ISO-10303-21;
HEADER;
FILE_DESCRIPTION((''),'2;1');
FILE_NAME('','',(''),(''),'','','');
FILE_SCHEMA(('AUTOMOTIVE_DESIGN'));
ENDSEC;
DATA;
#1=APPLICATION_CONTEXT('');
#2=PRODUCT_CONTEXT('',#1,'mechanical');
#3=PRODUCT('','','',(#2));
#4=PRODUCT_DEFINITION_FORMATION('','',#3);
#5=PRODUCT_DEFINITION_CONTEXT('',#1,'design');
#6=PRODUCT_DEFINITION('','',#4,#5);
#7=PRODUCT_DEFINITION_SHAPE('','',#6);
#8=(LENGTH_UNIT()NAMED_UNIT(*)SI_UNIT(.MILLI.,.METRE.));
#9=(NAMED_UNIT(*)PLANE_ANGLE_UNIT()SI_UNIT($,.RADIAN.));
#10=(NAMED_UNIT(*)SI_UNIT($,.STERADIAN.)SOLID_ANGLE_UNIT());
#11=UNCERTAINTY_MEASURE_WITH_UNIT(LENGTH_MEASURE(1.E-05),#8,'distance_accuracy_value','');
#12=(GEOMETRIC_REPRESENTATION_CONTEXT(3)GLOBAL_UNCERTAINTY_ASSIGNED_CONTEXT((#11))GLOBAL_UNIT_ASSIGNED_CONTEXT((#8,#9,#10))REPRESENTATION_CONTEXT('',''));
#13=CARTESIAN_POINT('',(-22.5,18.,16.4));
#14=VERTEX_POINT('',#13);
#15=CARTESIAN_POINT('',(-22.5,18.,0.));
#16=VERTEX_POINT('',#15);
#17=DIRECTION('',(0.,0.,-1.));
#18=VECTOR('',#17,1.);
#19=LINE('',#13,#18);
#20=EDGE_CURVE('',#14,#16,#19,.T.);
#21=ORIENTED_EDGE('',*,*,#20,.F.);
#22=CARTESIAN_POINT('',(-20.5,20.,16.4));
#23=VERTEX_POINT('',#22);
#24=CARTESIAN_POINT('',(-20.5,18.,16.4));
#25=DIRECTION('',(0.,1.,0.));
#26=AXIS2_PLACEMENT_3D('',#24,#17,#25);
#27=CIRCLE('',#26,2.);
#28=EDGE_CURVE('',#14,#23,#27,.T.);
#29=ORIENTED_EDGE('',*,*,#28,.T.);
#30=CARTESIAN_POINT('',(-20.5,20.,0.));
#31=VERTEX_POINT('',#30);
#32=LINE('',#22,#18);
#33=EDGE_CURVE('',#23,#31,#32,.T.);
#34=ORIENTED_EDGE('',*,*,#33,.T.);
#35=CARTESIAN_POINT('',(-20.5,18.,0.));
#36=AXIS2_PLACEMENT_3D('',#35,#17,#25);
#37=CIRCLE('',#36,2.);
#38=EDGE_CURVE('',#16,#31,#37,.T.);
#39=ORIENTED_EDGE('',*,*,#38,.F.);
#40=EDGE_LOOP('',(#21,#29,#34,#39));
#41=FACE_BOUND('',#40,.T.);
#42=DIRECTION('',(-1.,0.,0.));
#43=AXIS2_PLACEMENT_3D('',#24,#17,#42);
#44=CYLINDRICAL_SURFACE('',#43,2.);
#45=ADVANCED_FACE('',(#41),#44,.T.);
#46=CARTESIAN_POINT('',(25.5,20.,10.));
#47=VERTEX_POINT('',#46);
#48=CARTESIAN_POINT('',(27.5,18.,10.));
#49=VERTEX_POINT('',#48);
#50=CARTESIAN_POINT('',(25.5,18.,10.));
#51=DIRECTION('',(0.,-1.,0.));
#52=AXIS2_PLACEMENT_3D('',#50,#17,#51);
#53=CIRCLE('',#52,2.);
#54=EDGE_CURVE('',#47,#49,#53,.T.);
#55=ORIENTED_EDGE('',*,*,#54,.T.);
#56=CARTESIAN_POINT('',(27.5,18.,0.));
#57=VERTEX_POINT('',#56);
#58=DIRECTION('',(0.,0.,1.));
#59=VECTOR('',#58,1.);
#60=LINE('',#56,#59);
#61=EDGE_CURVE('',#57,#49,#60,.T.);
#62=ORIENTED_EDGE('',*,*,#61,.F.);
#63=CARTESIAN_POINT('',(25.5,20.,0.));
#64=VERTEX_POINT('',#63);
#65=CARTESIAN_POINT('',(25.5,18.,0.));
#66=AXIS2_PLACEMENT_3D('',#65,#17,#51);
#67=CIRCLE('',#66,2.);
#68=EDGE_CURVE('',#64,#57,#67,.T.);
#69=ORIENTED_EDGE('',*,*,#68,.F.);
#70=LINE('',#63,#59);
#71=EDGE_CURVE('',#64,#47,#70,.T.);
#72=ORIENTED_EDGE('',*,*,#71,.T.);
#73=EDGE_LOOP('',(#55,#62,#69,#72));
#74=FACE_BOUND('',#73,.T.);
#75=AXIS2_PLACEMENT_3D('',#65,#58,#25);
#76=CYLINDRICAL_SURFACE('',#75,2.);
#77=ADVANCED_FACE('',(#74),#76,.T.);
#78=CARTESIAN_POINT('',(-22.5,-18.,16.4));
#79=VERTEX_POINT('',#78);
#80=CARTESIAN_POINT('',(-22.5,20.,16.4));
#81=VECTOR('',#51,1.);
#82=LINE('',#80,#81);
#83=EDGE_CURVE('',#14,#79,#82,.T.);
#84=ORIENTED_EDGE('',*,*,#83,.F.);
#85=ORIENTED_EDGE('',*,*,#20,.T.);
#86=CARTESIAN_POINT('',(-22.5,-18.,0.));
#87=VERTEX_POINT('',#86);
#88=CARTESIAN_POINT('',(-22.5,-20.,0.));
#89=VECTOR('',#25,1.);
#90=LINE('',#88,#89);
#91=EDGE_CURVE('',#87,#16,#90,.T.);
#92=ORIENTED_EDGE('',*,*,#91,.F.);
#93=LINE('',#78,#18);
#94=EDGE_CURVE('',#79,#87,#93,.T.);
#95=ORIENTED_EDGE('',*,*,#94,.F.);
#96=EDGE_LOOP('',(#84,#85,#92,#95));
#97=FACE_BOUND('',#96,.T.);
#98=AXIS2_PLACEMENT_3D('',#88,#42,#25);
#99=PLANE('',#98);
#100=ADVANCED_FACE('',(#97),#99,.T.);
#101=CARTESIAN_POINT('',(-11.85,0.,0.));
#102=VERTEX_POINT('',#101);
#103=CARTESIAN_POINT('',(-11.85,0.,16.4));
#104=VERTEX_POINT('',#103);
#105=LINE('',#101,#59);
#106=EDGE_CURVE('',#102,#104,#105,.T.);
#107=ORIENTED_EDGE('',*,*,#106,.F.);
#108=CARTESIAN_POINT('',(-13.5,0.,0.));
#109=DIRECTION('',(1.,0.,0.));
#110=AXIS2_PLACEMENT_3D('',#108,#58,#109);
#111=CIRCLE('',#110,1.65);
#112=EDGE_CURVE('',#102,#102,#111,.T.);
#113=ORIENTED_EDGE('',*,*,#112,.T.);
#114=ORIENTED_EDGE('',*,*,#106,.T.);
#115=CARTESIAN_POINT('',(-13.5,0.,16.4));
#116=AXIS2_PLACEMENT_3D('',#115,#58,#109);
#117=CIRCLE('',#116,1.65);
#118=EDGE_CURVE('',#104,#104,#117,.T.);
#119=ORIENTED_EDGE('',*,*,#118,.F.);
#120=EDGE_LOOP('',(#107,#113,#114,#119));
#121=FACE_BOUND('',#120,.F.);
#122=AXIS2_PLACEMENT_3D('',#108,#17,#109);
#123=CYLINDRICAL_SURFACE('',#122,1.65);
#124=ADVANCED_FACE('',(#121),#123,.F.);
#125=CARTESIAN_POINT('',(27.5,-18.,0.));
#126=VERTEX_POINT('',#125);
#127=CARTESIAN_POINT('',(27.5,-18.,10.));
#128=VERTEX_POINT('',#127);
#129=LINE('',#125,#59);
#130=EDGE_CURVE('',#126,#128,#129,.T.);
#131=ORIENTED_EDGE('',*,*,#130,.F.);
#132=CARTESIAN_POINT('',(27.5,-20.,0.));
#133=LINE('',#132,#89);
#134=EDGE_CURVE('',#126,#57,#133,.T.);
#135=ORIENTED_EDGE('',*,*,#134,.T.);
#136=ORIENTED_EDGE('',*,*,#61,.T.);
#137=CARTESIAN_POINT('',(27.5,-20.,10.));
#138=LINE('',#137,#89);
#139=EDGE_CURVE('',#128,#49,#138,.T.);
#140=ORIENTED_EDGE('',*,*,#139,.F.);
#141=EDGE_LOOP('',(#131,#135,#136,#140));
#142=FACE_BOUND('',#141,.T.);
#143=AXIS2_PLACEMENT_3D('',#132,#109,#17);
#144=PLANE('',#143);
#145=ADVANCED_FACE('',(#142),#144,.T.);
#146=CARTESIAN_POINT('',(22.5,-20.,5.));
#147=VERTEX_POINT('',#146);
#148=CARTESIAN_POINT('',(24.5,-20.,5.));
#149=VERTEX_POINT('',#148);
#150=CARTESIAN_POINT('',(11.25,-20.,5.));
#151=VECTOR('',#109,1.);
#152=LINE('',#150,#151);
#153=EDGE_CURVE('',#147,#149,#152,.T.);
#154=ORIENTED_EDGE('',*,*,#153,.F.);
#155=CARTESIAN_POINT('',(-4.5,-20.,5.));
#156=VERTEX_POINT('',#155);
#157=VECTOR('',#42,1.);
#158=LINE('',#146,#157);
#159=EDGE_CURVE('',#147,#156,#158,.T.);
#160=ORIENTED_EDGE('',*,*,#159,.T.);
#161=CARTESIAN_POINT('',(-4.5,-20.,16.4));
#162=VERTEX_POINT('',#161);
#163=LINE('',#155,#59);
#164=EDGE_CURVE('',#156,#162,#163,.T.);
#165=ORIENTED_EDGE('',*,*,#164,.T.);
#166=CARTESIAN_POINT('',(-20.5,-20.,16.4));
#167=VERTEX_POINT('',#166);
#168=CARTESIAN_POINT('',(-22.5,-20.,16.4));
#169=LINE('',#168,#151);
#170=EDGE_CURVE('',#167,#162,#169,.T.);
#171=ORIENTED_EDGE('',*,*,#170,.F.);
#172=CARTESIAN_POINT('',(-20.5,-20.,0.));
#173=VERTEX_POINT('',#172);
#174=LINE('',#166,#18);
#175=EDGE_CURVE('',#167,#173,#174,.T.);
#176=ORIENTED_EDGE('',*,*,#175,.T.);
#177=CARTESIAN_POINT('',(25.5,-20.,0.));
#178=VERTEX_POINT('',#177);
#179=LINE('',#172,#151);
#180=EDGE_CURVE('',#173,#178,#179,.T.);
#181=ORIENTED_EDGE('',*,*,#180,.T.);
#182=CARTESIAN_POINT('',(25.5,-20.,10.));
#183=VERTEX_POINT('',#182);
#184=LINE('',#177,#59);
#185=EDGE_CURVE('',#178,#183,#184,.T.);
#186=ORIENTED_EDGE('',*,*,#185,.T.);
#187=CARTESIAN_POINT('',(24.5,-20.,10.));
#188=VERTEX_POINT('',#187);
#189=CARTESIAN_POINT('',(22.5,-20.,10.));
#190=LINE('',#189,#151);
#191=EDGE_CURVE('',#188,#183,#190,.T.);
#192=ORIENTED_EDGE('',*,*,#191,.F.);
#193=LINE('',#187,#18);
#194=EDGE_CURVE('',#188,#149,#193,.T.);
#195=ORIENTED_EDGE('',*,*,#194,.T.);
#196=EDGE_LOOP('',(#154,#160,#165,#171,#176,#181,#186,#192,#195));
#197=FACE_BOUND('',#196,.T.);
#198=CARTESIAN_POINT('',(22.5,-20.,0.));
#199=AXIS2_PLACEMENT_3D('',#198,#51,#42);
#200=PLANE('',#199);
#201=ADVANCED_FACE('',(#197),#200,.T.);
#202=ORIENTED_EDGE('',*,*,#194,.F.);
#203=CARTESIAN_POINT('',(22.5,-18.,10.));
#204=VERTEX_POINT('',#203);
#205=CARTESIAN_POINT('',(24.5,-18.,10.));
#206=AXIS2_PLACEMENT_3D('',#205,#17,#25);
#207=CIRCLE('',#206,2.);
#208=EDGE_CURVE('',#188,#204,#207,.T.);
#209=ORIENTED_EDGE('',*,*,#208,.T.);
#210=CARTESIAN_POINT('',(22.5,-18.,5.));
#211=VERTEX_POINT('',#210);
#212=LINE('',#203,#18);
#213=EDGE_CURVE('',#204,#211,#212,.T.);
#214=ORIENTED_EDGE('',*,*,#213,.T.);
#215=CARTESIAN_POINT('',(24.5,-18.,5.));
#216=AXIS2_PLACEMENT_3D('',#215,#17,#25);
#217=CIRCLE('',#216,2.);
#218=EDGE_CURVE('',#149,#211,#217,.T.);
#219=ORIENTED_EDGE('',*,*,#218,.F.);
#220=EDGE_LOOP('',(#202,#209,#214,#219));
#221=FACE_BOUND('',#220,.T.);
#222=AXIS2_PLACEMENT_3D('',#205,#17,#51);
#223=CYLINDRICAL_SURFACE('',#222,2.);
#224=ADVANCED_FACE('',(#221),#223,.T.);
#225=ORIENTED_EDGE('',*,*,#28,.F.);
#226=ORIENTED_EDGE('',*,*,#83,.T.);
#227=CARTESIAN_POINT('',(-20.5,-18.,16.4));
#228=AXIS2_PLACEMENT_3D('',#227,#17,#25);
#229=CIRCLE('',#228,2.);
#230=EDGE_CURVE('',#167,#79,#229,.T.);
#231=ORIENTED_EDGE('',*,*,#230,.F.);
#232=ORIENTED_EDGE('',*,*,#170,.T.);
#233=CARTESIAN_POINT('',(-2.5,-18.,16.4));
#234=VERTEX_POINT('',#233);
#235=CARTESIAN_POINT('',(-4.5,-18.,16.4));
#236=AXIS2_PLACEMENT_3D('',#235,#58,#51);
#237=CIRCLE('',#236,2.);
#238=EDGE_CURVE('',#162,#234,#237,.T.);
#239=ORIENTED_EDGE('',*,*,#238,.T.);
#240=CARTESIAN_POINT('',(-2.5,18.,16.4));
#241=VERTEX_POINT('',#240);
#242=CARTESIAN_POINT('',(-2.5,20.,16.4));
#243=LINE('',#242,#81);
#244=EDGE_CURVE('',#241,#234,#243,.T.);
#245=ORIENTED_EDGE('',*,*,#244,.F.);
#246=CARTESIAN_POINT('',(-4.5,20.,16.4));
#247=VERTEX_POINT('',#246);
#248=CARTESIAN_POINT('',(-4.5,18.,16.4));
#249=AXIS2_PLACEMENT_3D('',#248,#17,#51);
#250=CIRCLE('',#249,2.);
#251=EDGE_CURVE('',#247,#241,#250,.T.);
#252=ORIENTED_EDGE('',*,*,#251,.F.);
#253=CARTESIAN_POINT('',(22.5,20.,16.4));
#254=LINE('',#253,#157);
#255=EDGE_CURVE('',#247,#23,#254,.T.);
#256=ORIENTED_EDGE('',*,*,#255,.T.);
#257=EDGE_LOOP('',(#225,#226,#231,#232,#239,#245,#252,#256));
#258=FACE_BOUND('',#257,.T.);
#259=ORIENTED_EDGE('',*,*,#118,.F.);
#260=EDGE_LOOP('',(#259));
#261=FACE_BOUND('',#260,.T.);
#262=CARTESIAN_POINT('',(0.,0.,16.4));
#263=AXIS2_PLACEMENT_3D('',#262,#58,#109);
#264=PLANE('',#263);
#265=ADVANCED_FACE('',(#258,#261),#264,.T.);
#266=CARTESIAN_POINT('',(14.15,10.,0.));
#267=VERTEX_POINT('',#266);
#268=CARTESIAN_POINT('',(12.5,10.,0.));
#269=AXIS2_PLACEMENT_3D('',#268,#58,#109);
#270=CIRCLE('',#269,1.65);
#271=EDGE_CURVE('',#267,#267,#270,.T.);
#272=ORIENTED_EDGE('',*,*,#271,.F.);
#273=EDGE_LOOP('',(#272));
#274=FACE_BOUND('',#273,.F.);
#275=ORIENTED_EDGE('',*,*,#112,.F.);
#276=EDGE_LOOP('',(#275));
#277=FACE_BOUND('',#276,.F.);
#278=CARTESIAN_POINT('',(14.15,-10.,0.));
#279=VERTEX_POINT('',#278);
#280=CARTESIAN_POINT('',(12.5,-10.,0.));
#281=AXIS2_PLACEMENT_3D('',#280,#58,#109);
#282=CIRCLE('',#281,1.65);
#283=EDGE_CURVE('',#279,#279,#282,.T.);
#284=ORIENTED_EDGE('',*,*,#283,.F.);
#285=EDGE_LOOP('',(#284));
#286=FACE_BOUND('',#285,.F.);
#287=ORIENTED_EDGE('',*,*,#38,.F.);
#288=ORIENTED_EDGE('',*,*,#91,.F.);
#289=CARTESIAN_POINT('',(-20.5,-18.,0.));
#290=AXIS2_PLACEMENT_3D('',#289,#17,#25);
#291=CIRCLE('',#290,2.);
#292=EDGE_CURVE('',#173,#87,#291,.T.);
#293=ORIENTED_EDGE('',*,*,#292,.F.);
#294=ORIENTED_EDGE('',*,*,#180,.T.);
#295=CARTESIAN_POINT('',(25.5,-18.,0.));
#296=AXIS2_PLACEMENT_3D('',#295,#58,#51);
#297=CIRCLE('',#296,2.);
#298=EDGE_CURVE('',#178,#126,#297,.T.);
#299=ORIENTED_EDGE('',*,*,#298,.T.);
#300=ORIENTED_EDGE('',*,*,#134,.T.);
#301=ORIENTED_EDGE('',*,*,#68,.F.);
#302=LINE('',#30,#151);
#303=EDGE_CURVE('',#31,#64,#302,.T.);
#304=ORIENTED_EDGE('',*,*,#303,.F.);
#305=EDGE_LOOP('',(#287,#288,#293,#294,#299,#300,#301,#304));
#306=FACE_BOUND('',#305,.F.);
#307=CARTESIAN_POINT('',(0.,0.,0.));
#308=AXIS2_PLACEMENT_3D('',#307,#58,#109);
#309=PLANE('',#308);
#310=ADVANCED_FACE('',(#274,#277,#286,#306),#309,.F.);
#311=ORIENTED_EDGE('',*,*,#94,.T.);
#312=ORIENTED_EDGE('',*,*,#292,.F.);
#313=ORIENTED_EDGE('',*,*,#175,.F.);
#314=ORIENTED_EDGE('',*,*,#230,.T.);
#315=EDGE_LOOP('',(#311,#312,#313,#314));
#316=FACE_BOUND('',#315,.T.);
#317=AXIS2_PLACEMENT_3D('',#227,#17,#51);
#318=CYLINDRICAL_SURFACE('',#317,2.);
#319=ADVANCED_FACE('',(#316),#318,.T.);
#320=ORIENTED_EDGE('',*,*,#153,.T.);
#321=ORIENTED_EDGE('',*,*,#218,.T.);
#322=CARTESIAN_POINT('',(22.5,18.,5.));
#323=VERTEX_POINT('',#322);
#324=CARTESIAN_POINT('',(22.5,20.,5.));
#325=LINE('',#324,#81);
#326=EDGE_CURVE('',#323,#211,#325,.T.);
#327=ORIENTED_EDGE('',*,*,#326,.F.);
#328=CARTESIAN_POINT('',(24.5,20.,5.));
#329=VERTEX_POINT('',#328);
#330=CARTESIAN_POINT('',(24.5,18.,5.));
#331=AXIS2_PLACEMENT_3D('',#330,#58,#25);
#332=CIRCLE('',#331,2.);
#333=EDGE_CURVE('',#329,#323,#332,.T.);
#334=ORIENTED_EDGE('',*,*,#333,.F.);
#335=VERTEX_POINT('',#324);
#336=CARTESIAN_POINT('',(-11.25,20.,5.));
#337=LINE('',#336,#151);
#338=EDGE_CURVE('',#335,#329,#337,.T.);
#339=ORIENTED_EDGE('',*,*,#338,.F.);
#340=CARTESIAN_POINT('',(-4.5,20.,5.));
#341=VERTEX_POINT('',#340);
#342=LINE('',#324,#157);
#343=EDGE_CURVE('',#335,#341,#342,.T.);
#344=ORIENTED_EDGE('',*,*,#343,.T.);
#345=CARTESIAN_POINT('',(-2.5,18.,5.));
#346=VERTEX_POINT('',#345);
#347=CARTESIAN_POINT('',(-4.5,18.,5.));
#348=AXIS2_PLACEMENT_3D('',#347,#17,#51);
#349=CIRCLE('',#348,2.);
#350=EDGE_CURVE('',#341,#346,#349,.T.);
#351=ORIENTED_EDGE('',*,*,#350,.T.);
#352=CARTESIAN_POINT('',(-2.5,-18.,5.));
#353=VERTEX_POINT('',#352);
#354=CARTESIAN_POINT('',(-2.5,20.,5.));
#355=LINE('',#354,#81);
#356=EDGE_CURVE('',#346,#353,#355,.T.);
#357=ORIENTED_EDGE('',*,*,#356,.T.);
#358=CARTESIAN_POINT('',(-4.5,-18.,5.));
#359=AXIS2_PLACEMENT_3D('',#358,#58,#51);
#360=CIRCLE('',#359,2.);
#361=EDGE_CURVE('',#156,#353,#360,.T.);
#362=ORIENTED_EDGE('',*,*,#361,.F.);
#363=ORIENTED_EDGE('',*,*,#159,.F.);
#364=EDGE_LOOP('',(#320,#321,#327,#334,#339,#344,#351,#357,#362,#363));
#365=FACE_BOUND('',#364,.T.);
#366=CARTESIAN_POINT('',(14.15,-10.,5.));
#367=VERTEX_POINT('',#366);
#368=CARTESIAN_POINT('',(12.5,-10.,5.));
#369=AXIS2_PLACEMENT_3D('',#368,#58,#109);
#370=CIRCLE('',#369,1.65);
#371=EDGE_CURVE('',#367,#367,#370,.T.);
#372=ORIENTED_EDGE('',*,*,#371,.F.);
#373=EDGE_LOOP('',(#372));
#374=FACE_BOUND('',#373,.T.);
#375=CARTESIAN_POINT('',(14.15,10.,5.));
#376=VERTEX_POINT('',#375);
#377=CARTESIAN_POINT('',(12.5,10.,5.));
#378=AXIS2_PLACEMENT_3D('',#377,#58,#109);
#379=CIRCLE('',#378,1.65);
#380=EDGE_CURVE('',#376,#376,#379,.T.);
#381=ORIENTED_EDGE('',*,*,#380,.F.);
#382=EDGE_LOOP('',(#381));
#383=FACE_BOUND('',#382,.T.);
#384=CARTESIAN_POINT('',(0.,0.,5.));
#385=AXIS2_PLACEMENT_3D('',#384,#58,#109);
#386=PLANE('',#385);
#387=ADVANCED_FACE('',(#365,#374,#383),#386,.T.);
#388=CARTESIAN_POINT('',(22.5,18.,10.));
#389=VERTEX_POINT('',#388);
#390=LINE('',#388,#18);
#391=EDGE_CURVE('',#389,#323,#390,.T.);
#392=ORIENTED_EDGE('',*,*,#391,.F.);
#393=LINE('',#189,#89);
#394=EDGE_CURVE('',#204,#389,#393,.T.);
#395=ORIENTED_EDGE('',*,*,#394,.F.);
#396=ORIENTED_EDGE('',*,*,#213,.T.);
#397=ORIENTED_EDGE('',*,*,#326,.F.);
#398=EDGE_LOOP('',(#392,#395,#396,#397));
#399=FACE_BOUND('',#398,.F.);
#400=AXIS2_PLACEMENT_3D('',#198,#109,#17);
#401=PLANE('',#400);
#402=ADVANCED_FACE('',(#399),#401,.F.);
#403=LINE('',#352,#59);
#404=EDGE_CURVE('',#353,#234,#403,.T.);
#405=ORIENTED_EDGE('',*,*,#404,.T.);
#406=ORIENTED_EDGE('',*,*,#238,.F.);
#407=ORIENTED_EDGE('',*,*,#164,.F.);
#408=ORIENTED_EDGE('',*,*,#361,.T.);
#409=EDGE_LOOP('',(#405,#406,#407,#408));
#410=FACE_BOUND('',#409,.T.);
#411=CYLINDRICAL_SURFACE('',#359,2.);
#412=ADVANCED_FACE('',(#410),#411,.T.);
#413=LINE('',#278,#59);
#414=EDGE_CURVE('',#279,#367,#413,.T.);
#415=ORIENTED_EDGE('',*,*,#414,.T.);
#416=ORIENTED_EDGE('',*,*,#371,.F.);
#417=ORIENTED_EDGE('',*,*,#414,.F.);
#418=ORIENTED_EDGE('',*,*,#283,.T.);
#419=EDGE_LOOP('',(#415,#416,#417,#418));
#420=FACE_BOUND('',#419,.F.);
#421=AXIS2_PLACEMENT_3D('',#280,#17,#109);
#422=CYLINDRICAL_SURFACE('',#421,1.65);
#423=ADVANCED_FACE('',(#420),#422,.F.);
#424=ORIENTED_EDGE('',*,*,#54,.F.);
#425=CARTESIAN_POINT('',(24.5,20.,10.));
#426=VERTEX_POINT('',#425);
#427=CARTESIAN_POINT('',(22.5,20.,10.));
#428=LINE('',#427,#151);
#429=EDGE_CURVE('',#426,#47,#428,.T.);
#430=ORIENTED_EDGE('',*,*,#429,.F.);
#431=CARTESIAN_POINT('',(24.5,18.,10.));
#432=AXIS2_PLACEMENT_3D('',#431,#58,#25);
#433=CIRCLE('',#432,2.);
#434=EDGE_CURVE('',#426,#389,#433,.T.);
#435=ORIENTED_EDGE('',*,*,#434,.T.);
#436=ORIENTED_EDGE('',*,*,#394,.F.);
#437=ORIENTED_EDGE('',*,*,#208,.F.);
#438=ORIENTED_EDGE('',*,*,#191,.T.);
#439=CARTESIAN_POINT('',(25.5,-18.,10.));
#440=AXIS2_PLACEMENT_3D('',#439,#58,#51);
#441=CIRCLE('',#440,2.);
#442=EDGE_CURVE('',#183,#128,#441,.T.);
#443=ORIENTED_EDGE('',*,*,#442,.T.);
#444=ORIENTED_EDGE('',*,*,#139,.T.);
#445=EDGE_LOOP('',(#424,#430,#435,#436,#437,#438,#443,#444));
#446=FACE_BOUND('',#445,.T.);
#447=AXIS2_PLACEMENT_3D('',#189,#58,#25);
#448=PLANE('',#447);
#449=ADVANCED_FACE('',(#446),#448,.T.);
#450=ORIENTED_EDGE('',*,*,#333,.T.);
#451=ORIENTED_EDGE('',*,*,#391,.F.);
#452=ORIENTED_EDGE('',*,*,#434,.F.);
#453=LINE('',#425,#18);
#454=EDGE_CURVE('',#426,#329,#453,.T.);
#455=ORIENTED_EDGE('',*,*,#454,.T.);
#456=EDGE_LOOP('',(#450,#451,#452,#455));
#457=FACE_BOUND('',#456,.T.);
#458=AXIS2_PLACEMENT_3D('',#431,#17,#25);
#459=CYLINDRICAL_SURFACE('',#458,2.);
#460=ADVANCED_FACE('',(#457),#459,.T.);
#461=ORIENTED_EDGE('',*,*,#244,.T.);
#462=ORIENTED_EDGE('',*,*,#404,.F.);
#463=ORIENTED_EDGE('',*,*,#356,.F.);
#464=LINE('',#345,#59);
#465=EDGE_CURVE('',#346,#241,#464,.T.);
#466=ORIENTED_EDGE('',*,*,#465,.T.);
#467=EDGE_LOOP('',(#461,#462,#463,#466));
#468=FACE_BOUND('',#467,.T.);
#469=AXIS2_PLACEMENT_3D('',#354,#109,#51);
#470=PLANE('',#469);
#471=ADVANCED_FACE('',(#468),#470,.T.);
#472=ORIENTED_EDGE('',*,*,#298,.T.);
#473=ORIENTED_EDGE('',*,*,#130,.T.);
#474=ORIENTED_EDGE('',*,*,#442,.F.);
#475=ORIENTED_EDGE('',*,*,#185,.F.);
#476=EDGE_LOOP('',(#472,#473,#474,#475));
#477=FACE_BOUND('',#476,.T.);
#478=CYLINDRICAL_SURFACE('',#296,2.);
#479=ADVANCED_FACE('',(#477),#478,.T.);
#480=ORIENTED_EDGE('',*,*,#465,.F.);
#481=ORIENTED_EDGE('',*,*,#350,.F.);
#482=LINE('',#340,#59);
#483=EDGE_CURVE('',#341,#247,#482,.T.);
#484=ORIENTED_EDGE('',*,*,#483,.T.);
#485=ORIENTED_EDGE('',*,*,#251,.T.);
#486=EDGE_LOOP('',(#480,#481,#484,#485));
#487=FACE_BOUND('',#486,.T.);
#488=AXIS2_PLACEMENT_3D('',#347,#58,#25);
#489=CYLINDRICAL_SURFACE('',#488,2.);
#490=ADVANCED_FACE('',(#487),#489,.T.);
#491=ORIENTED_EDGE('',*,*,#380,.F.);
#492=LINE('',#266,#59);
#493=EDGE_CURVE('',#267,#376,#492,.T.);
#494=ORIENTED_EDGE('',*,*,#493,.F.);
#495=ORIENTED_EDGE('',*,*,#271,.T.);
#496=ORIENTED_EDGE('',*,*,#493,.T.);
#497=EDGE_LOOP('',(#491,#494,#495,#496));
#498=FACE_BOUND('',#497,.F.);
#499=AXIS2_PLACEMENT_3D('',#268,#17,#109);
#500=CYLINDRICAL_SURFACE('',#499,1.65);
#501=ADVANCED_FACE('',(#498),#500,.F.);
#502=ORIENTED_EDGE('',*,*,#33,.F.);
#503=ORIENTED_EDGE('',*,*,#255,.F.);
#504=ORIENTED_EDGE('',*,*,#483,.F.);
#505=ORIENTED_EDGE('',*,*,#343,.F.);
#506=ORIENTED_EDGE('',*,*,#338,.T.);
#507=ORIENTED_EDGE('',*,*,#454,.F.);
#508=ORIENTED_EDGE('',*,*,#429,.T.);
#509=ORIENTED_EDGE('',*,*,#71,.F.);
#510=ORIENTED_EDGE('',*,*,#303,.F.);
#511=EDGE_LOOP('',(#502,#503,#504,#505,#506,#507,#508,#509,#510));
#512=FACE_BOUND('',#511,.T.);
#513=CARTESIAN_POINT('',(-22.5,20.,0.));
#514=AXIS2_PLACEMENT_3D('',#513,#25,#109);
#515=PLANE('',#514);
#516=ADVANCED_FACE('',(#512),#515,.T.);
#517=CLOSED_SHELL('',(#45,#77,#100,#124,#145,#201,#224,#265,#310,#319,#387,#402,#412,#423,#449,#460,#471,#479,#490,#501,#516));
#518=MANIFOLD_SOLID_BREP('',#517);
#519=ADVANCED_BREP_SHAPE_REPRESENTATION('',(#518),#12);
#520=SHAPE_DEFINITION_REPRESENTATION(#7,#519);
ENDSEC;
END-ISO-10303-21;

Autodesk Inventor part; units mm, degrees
ref_plane "YZ Plane" through (0, 0, 0) normal (1, 0, 0) x (0, 1, 0)
ref_plane "XZ Plane" through (0, 0, 0) normal (0, 1, 0) x (-1, 0, 0)
ref_plane "XY Plane" through (0, 0, 0) normal (0, 0, 1) x (1, 0, 0)
sketch "スケッチ1" plane through (0, 0, 0) normal (0, 0, 1) x (1, 0, 0)
  line L0 (22.5, -20) -> (-22.5, -20)
  line L1 (-22.5, -20) -> (-22.5, 20)
  line L2 (-22.5, 20) -> (22.5, 20)
  line L3 (22.5, 20) -> (22.5, -20)
  line L4 (22.5, -20) -> (-22.5, 20) construction
  line L5 (-22.5, -20) -> (22.5, 20) construction
  circle A0 centre (12.5, 10) radius 1.65
  circle A1 centre (12.5, -10) radius 1.65
  circle A2 centre (-13.5, 0) radius 1.65
  point P0 (0, 0)
  dimension "d0" = 45
  dimension "d1" = 40
  dimension "d2" = 3.3
  dimension "d3" = 3.3
  dimension "d4" = 10
  dimension "d5" = 10
  dimension "d6" = 10
  dimension "d7" = 10
  dimension "d8" = 3.3
  dimension "d9" = 36
  dimension "d10" = 20
extrude "押し出し1" add sketch "スケッチ1" along normal blind 5
sketch "スケッチ2" plane through (0, 0, 5) normal (0, 0, 1) x (1, 0, 0)
  line L0 (22.5, 20) -> (-22.5, 20) projected
  line L1 (-22.5, 20) -> (-22.5, -20) projected
  line L2 (-22.5, -20) -> (22.5, -20) projected
  line L3 (22.5, -20) -> (22.5, 20) projected
  circle A0 centre (-13.5, 0) radius 1.65 projected
  circle A1 centre (12.5, -10) radius 1.65 projected
  circle A2 centre (12.5, 10) radius 1.65 projected
  line L4 (-22.5, 20) -> (0, 20)
  line L5 (0, 20) -> (0, -20)
  line L6 (0, -20) -> (-22.5, -20)
  line L7 (-22.5, -20) -> (-22.5, 20)
  line L8 (22.5, 20) -> (-22.5, 20) projected
  line L9 (-2.5, 20) -> (-2.5, -20)
  point P0 (0, 0)
  point P1 (-2.5, -20)
  dimension "d15" = 20
extrude "押し出し2" add sketch "スケッチ2" along normal blind 11.4 contours L9 L2 L1 L0
fillet "フィレット1" radius 2 4 edges at (-22.5, 20, 8.2) (-22.5, -20, 8.2) (-2.5, -20, 10.7) (-2.5, 20, 10.7)
sketch "スケッチ3" plane through (22.5, -20, 0) normal (1, 0, 0) x (0, 0, -1)
  line L0 (0, 0) -> (0, 40) projected
  line L1 (0, 40) -> (-5, 40) projected
  line L2 (-5, 0) -> (-5, 40) projected
  line L3 (0, 0) -> (-5, 0) projected
  line L4 (-5, 40) -> (-16.4, 40) projected
  line L5 (0, 0) -> (-10, 0)
  line L6 (-10, 0) -> (-10, 40)
  line L7 (-10, 40) -> (0, 40)
  line L8 (0, 40) -> (0, 0)
  point P0 (0, 20)
  dimension "d17" = 10
extrude "押し出し3" add sketch "スケッチ3" along normal blind 5
fillet "フィレット2" radius 2 4 edges at (27.5, 20, 5) (27.5, -20, 5) (22.5, 20, 7.5) (22.5, -20, 7.5)
properties part number "soroban_hold"
